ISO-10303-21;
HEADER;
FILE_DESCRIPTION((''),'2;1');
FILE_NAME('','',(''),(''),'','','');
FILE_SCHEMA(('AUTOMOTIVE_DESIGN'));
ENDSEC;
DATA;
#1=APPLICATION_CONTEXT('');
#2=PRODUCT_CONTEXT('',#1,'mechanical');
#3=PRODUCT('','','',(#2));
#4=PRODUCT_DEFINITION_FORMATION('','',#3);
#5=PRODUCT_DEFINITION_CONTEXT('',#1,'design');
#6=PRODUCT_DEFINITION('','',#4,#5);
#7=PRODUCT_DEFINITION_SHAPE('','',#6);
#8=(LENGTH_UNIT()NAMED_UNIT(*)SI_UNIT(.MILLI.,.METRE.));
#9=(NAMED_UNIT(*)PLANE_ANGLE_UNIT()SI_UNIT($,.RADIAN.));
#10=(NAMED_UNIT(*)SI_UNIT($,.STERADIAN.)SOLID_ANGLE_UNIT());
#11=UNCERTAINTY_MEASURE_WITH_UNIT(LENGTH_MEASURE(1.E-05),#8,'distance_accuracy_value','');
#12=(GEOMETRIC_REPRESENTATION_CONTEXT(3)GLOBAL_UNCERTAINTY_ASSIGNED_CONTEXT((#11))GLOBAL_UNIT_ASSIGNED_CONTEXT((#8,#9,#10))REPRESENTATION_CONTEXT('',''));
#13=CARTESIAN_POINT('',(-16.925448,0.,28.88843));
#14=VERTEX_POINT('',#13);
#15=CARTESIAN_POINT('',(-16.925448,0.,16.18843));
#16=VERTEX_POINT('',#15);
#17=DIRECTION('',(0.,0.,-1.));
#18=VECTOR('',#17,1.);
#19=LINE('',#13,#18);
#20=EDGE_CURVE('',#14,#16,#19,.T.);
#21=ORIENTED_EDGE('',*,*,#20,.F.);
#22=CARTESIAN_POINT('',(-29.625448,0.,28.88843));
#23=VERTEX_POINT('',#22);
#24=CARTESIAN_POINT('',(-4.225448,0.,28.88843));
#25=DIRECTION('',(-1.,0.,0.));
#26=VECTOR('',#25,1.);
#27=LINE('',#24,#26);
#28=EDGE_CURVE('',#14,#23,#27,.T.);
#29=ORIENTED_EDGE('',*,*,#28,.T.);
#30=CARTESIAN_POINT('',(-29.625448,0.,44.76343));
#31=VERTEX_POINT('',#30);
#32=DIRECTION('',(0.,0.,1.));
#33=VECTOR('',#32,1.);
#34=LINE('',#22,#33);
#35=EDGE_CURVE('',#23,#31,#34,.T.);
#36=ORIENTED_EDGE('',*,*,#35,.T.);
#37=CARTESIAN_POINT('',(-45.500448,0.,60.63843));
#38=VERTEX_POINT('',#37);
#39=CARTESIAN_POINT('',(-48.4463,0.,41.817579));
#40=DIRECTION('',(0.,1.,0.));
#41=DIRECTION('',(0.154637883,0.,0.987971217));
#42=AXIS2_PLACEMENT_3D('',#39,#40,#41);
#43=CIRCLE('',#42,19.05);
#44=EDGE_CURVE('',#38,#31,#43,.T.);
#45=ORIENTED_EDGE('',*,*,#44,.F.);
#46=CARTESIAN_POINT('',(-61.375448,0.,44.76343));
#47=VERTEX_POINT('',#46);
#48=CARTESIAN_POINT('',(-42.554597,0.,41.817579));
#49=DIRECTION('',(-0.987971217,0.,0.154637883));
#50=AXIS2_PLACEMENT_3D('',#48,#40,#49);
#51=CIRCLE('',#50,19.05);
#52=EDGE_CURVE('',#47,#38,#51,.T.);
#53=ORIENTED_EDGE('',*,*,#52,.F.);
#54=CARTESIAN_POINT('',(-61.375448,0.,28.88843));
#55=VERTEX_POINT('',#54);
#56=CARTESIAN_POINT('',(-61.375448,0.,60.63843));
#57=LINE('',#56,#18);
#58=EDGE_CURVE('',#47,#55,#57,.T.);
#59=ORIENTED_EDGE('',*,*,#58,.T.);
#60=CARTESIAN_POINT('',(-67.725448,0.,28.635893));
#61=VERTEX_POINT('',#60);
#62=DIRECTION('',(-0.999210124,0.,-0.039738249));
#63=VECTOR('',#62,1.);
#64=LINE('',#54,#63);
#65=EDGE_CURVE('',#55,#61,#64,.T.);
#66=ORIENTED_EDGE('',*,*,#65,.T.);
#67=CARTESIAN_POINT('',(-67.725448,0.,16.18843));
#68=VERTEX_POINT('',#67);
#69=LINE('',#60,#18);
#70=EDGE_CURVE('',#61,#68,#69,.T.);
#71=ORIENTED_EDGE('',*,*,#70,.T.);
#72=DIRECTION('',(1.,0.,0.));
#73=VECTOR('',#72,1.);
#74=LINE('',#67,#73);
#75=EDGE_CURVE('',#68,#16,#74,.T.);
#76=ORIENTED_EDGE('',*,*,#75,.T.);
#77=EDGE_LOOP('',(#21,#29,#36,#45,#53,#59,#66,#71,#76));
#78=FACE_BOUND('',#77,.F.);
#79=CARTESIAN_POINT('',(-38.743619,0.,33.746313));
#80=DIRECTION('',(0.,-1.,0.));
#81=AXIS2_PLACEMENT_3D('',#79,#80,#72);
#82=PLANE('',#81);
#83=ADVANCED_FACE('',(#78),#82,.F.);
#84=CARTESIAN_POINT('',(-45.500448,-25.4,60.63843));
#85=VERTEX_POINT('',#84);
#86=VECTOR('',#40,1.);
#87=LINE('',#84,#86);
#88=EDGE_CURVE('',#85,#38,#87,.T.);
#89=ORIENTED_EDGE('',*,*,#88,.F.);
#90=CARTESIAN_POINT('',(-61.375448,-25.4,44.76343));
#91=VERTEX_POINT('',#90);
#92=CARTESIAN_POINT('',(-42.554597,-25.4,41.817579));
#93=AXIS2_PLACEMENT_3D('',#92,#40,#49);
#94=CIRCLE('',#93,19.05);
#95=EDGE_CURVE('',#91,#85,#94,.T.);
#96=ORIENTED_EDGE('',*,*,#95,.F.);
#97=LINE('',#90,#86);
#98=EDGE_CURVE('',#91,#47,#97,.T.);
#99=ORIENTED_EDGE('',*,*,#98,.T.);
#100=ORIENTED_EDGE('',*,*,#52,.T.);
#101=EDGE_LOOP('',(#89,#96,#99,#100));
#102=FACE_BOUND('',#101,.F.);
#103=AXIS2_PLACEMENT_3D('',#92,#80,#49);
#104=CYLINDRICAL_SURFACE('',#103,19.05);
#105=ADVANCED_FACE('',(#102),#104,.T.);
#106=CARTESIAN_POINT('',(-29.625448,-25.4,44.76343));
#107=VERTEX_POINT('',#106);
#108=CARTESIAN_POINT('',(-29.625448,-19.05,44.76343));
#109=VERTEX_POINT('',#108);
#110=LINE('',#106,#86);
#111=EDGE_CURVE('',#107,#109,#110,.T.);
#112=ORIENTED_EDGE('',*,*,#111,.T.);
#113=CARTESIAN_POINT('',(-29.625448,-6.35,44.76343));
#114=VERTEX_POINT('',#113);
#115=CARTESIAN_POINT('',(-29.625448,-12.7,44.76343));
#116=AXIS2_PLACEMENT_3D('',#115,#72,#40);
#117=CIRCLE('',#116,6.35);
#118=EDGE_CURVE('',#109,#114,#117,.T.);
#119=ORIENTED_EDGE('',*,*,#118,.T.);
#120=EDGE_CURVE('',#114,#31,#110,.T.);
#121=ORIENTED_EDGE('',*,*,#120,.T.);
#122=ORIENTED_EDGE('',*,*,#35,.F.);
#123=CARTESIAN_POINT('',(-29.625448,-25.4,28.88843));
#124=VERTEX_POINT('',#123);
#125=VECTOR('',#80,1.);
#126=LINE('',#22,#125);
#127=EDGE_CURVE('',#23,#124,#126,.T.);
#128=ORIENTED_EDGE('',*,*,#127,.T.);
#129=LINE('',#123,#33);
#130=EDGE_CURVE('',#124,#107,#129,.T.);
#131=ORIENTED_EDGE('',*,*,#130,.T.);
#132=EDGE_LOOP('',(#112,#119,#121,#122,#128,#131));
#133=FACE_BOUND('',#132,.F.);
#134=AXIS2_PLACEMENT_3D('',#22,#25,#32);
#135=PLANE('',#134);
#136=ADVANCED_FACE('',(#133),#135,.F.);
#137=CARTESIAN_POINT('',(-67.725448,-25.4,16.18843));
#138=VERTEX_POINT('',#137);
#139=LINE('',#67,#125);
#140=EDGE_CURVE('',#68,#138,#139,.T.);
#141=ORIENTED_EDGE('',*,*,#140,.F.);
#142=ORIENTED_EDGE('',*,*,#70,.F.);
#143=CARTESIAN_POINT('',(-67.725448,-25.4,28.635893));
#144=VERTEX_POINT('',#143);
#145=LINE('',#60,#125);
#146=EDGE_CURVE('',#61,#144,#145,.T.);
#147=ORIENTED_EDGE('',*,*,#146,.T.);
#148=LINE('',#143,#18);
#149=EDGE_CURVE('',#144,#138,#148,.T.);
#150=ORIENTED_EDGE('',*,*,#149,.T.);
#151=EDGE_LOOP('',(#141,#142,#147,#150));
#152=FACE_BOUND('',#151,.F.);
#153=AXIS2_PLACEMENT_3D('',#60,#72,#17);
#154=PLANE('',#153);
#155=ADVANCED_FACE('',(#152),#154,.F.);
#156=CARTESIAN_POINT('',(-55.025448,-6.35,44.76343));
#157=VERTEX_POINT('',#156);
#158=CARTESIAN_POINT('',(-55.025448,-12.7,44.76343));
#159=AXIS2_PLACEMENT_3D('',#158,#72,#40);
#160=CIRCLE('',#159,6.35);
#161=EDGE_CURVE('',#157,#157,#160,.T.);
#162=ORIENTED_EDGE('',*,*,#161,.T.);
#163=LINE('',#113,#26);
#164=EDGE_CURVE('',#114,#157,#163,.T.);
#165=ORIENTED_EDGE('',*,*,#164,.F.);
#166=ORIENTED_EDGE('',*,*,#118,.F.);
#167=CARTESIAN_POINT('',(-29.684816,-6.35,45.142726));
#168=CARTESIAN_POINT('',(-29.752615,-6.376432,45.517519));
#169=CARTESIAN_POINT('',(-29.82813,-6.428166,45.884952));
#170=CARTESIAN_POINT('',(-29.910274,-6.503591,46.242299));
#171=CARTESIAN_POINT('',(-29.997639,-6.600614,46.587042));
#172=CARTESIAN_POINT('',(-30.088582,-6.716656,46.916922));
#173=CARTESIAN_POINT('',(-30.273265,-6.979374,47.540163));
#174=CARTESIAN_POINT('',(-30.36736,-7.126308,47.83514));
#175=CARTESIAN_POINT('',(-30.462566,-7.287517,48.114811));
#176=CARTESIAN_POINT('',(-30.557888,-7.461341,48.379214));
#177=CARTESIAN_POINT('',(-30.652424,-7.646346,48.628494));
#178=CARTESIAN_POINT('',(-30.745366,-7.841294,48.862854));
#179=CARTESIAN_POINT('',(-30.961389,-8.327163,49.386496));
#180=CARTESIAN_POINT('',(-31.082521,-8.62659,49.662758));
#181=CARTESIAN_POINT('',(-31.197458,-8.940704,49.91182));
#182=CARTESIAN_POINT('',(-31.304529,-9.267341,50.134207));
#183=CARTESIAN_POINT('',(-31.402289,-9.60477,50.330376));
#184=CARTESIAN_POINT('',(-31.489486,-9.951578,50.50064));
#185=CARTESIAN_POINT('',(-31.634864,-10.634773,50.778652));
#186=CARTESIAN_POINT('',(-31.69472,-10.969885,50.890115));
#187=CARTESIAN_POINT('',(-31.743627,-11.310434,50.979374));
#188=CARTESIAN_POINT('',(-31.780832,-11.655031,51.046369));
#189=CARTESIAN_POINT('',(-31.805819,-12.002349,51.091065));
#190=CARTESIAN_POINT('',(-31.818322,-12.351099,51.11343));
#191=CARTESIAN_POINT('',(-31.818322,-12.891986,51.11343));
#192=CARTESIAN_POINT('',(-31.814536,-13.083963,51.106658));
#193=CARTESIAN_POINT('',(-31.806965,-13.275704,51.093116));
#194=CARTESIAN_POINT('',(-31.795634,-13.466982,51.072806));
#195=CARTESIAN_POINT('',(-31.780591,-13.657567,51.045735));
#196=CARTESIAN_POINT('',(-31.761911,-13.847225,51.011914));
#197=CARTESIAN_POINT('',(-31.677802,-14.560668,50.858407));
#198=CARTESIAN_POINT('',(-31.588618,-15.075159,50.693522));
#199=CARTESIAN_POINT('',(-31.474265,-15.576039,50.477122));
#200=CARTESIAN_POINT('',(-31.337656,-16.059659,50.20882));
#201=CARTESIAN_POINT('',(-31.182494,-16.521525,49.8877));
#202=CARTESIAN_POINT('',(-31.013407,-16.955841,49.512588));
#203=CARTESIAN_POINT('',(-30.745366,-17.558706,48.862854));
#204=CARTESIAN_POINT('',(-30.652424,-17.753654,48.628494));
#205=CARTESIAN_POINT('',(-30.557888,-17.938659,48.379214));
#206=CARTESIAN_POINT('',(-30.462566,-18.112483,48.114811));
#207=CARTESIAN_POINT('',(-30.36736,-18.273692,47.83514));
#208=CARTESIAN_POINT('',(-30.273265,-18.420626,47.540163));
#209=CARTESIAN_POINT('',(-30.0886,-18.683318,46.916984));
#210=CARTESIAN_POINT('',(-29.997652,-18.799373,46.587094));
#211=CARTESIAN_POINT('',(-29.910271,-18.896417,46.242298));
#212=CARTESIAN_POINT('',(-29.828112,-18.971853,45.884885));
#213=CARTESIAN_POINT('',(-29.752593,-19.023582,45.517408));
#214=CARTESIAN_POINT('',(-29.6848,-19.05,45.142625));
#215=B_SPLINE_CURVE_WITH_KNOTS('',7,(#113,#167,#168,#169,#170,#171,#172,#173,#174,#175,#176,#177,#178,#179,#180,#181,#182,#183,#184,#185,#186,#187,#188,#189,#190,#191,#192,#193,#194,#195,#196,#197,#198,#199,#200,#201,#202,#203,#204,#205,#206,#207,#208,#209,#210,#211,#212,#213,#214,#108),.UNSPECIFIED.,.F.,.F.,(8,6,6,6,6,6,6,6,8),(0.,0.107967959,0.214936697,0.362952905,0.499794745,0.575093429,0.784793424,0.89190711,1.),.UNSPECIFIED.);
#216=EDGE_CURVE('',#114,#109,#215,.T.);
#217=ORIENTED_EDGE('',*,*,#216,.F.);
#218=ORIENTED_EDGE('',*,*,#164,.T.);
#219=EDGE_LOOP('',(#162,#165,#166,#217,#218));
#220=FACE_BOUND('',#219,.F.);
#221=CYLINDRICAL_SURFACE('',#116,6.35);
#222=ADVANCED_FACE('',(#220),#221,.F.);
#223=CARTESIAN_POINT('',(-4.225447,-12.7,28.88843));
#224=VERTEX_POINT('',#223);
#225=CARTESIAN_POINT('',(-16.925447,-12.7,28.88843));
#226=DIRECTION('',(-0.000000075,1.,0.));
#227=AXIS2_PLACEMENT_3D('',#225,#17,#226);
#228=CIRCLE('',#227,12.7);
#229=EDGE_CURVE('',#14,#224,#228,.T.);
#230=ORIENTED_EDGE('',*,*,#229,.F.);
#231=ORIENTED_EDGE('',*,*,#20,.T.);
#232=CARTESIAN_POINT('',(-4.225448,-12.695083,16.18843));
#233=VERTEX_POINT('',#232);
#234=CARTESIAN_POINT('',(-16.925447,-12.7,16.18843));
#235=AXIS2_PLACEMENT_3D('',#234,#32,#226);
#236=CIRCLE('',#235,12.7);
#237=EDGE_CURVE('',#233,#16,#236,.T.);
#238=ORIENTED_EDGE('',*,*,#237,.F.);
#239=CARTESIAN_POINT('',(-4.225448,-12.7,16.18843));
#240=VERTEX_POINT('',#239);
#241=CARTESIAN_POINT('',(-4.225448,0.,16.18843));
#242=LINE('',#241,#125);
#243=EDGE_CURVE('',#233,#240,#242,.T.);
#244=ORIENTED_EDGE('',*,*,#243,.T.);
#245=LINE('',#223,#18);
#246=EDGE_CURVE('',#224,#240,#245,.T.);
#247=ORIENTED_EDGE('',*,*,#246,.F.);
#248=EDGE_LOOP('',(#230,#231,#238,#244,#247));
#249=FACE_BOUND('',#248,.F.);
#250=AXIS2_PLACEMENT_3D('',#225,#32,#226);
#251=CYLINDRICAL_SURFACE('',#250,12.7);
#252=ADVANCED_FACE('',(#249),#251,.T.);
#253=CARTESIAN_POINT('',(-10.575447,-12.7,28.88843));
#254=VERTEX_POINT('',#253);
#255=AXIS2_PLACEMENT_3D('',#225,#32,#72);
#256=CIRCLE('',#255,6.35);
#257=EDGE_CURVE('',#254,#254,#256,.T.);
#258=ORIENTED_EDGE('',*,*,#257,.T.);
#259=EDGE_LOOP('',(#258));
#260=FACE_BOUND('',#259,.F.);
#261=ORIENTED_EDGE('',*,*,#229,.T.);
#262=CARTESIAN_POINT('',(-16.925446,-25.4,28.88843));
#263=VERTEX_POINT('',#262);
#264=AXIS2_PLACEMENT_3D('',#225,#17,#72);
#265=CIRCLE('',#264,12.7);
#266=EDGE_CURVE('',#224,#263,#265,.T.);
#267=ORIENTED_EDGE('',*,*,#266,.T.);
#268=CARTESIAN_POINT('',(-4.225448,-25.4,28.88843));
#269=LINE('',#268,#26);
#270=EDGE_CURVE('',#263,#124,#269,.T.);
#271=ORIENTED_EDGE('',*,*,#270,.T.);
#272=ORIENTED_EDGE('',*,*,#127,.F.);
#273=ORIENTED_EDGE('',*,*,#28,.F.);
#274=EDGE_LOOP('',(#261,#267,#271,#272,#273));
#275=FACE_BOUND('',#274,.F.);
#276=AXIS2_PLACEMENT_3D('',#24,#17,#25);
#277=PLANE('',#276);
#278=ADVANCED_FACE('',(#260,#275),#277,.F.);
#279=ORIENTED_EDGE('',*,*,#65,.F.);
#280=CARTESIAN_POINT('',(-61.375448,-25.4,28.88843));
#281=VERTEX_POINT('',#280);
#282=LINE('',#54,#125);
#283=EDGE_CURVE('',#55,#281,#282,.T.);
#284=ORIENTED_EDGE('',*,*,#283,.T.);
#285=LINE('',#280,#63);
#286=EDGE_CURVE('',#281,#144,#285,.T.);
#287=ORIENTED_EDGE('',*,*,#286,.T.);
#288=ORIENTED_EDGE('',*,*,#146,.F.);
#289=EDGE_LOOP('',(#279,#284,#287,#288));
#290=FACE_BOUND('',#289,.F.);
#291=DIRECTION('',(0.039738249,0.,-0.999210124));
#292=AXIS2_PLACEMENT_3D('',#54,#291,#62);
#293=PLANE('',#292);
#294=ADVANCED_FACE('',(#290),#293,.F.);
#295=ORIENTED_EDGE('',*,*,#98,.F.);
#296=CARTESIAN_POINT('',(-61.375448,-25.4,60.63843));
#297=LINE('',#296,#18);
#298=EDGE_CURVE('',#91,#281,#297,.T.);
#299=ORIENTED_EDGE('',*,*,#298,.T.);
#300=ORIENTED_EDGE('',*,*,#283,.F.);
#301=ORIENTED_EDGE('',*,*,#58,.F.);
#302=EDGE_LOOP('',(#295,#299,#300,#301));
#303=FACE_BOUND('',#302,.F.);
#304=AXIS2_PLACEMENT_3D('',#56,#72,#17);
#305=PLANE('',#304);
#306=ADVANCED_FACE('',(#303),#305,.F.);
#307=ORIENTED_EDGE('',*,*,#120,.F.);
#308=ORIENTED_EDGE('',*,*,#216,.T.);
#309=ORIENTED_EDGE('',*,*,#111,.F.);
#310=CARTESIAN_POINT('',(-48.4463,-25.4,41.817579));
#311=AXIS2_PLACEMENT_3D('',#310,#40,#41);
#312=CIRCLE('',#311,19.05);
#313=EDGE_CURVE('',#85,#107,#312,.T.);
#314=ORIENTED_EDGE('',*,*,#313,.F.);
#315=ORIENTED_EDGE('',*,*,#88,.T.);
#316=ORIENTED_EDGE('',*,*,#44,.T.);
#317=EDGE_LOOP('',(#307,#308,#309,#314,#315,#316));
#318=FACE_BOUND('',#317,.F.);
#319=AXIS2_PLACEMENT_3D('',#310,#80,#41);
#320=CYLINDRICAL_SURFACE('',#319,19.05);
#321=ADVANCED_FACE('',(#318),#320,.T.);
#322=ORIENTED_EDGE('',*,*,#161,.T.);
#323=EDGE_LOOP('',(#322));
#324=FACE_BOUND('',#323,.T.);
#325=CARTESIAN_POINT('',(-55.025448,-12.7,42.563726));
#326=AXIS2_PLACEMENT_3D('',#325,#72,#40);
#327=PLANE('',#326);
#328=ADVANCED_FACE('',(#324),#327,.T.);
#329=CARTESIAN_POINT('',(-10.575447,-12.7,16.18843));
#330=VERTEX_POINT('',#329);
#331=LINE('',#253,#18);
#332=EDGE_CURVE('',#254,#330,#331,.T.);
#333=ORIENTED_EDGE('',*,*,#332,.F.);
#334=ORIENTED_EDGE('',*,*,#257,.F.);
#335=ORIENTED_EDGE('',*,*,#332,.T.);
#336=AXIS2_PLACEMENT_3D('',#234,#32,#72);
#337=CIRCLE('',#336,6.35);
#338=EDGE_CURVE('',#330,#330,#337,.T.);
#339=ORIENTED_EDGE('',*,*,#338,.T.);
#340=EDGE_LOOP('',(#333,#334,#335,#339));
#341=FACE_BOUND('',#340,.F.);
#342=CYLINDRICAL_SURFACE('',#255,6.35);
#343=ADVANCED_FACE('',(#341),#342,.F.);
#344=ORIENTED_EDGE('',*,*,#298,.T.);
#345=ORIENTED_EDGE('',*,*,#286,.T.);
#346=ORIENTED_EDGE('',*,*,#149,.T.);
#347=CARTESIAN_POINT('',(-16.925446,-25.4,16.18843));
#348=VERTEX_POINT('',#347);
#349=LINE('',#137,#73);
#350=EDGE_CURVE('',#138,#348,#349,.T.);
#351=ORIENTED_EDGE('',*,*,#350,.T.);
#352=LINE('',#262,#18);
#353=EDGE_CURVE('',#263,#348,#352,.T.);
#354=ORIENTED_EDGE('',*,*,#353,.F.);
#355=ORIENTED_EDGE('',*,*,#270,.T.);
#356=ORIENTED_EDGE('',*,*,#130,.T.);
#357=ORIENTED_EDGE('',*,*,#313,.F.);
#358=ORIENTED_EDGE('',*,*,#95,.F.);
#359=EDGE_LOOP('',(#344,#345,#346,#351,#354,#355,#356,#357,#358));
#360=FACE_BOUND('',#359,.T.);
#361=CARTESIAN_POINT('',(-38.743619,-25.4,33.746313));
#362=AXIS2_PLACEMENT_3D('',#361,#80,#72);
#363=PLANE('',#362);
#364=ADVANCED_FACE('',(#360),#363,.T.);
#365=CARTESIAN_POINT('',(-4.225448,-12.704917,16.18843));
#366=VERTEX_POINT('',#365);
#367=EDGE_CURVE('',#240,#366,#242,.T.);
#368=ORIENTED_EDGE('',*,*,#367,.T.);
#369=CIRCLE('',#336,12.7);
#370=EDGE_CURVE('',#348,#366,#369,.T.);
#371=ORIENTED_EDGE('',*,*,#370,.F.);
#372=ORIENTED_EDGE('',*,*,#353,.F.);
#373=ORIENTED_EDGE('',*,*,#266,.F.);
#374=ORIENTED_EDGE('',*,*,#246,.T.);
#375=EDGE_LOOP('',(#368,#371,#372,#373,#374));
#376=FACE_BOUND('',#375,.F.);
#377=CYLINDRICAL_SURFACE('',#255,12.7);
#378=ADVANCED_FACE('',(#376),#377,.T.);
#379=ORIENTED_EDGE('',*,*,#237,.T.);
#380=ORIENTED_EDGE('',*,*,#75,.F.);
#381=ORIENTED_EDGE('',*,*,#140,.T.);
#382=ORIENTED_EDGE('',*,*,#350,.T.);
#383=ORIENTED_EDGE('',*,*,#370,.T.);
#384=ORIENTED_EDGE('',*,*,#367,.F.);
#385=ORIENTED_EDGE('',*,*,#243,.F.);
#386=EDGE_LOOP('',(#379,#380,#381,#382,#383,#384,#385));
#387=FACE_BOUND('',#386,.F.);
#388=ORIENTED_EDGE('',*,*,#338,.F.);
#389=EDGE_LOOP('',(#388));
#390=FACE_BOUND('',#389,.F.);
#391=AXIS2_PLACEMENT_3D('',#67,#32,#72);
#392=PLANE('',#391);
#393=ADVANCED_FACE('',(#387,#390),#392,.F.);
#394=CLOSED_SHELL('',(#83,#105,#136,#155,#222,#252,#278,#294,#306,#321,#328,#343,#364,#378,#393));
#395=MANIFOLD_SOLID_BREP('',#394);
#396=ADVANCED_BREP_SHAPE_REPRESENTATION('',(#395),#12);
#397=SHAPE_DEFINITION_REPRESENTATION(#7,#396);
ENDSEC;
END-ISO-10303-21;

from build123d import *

# Parameters (mm, degrees)
F1_DEPTH = 25.4
F3_DEPTH = 25.4
F4_R     = 6.35
F5_DEPTH = 25.4
F7_DEPTH = 25.4
F9_DEPTH = 25.4


# Not quite as in the source:
# - ends of sketch curves that miss each other by under 0.0002 mm in the source are joined


with BuildPart() as f1:
    # F0 (on Front) → F1 (new body)
    with BuildSketch(Plane.XZ):
        Polygon((-67.7254482706, 28.6358930171), (-67.7254482706, 16.1884303746), (-4.2254482706, 16.1884303746), (-4.2254482706, 28.8884303746), (-29.6254482706, 28.8884303746), (-29.6254482706, 60.6384303746), (-61.3754482706, 60.6384303746), (-61.3754482706, 28.8884303746), align=None)
    extrude(amount=F1_DEPTH)

    # F2 (on face) → F3 (cut)
    with BuildSketch(Plane.XY.offset(28.8884303746)):
        with BuildLine():
            ThreePointArc((-16.9254482706, 0), (-7.9451915343, -3.7197435424), (-4.2254473189, -12.7))
            Line((-4.2254473189, -12.7), (-4.2254482706, 0))
            Line((-4.2254482706, 0), (-16.9254482706, 0))
        make_face()
        with BuildLine():
            ThreePointArc((-4.2254473189, -12.7), (-7.9451908613, -21.6802557846), (-16.9254463672, -25.4))
            Line((-16.9254463672, -25.4), (-4.2254482706, -25.4))
            Line((-4.2254482706, -25.4), (-4.2254473189, -12.7))
        make_face()
    extrude(amount=-F3_DEPTH, mode=Mode.SUBTRACT)

    # F4 (on face) → F5 (cut)
    with BuildSketch(Plane.XY.offset(28.8884303746)):
        with Locations((-16.9254473189, -12.7)):
            Circle(F4_R)
    extrude(amount=-F5_DEPTH, mode=Mode.SUBTRACT)

    # F6 (on face) → F7 (cut)
    with BuildSketch(Plane.XZ.offset(25.4)):
        with BuildLine():
            ThreePointArc((-45.5004482706, 60.6384303746), (-34.9759157672, 55.287962878), (-29.6254482706, 44.7634303746))
            Line((-29.6254482706, 44.7634303746), (-29.6254482706, 60.6384303746))
            Line((-29.6254482706, 60.6384303746), (-45.5004482706, 60.6384303746))
        make_face()
        with BuildLine():
            ThreePointArc((-61.3754482706, 44.7634303746), (-56.0249807741, 55.287962878), (-45.5004482706, 60.6384303746))
            Line((-45.5004482706, 60.6384303746), (-61.3754482706, 60.6384303746))
            Line((-61.3754482706, 60.6384303746), (-61.3754482706, 44.7634303746))
        make_face()
    extrude(amount=-F7_DEPTH, mode=Mode.SUBTRACT)

    # F8 (on face) → F9 (cut)
    with BuildSketch(Plane.YZ.offset(-29.6254482706)):
        with BuildLine():
            ThreePointArc((-19.05, 44.7634303746), (-12.7, 38.4134303746), (-6.35, 44.7634303746))
            Line((-6.35, 44.7634303746), (-19.05, 44.7634303746))
        make_face()
        with BuildLine():
            Line((-19.05, 44.7634303746), (-6.35, 44.7634303746))
            ThreePointArc((-6.35, 44.7634303746), (-12.7, 51.1134303746), (-19.05, 44.7634303746))
        make_face()
    extrude(amount=-F9_DEPTH, mode=Mode.SUBTRACT)


solid = f1.part
